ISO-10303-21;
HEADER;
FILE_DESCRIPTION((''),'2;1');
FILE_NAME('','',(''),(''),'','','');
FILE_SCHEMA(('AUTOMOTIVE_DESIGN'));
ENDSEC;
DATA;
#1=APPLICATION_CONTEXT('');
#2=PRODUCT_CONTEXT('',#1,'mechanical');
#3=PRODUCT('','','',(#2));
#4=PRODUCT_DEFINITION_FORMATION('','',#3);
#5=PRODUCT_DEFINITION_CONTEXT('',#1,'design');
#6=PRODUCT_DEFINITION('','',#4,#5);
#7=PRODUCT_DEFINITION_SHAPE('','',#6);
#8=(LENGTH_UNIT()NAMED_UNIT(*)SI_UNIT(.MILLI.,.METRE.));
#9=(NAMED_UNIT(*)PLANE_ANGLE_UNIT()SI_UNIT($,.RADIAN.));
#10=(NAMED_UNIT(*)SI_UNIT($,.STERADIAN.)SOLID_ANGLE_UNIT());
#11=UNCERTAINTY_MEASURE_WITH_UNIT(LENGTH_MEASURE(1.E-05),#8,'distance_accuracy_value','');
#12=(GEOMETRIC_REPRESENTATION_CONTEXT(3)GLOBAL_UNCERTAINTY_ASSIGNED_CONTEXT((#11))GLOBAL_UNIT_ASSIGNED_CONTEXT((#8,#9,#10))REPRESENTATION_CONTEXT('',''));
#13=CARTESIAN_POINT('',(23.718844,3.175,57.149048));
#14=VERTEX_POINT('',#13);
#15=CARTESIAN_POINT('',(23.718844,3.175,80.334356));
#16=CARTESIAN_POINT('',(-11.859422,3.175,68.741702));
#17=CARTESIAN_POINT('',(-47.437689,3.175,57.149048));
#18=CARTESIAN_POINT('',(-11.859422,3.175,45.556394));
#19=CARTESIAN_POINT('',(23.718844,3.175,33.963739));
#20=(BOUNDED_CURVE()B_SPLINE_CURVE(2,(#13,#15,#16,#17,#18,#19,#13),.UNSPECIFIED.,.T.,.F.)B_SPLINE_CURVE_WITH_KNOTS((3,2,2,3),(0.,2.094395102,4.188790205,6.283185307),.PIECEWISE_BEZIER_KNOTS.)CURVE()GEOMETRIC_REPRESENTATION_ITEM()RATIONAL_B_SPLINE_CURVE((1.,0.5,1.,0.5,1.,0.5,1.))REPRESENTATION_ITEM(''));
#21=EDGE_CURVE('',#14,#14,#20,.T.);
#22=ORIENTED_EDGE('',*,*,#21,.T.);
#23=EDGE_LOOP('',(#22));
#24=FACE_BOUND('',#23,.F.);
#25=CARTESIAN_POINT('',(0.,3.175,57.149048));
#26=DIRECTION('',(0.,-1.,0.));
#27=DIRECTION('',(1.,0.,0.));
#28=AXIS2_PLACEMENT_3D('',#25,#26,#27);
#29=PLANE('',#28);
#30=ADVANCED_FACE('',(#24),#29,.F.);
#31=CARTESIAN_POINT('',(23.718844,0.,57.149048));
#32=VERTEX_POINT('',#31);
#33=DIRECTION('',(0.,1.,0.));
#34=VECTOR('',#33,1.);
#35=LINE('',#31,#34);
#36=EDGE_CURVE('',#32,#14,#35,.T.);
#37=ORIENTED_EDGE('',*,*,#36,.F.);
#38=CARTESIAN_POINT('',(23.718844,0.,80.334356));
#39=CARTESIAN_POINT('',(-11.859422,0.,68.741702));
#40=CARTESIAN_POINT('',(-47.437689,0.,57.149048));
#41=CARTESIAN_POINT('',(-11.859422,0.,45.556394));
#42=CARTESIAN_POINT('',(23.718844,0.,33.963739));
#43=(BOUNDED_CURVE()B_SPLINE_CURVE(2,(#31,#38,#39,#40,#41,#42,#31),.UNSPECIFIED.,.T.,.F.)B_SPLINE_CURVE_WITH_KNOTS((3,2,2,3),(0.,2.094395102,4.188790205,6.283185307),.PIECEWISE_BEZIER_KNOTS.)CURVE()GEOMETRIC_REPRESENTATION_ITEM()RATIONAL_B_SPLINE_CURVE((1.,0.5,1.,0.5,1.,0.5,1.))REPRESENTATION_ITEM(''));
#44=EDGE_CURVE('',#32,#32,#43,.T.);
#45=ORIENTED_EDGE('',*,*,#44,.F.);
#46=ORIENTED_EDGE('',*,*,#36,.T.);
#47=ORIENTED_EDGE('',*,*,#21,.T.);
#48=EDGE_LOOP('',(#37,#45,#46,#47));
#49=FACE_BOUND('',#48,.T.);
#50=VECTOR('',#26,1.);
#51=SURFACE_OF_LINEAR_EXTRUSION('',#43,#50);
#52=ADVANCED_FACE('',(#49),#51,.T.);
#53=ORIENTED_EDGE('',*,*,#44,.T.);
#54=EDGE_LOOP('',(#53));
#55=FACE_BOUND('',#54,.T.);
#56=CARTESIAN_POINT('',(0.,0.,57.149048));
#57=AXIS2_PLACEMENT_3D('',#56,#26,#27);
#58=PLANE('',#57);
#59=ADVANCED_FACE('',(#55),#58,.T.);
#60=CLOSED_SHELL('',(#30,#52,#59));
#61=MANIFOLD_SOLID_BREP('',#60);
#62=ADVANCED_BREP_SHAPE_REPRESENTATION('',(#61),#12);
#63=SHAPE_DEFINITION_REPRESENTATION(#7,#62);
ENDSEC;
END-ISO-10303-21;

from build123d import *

# Parameters (mm, degrees)
F1_DEPTH = 3.175


# Not quite as in the source:
# - a feature names something its author has since deleted; it is built from what else it names


with BuildPart() as f1:
    # F0 (on Front) → F1 (new body)
    with BuildSketch(Plane.XZ):
        with BuildLine():
            add(Edge.make_bspline(
                [(23.7188442589, 57.1490477352), (23.7188442589, 80.3343560019), (-11.8594221295, 68.7417018686), (-47.4376885178, 57.1490477352), (-11.8594221295, 45.5563936019), (23.7188442589, 33.9637394686), (23.7188442589, 57.1490477352)],
                knots=[0, 0, 0, 2.0943951024, 2.0943951024, 4.1887902048, 4.1887902048, 6.2831853072, 6.2831853072, 6.2831853072], degree=2, weights=[1, 0.5, 1, 0.5, 1, 0.5, 1]))
        make_face()
    extrude(amount=-F1_DEPTH)


solid = f1.part
